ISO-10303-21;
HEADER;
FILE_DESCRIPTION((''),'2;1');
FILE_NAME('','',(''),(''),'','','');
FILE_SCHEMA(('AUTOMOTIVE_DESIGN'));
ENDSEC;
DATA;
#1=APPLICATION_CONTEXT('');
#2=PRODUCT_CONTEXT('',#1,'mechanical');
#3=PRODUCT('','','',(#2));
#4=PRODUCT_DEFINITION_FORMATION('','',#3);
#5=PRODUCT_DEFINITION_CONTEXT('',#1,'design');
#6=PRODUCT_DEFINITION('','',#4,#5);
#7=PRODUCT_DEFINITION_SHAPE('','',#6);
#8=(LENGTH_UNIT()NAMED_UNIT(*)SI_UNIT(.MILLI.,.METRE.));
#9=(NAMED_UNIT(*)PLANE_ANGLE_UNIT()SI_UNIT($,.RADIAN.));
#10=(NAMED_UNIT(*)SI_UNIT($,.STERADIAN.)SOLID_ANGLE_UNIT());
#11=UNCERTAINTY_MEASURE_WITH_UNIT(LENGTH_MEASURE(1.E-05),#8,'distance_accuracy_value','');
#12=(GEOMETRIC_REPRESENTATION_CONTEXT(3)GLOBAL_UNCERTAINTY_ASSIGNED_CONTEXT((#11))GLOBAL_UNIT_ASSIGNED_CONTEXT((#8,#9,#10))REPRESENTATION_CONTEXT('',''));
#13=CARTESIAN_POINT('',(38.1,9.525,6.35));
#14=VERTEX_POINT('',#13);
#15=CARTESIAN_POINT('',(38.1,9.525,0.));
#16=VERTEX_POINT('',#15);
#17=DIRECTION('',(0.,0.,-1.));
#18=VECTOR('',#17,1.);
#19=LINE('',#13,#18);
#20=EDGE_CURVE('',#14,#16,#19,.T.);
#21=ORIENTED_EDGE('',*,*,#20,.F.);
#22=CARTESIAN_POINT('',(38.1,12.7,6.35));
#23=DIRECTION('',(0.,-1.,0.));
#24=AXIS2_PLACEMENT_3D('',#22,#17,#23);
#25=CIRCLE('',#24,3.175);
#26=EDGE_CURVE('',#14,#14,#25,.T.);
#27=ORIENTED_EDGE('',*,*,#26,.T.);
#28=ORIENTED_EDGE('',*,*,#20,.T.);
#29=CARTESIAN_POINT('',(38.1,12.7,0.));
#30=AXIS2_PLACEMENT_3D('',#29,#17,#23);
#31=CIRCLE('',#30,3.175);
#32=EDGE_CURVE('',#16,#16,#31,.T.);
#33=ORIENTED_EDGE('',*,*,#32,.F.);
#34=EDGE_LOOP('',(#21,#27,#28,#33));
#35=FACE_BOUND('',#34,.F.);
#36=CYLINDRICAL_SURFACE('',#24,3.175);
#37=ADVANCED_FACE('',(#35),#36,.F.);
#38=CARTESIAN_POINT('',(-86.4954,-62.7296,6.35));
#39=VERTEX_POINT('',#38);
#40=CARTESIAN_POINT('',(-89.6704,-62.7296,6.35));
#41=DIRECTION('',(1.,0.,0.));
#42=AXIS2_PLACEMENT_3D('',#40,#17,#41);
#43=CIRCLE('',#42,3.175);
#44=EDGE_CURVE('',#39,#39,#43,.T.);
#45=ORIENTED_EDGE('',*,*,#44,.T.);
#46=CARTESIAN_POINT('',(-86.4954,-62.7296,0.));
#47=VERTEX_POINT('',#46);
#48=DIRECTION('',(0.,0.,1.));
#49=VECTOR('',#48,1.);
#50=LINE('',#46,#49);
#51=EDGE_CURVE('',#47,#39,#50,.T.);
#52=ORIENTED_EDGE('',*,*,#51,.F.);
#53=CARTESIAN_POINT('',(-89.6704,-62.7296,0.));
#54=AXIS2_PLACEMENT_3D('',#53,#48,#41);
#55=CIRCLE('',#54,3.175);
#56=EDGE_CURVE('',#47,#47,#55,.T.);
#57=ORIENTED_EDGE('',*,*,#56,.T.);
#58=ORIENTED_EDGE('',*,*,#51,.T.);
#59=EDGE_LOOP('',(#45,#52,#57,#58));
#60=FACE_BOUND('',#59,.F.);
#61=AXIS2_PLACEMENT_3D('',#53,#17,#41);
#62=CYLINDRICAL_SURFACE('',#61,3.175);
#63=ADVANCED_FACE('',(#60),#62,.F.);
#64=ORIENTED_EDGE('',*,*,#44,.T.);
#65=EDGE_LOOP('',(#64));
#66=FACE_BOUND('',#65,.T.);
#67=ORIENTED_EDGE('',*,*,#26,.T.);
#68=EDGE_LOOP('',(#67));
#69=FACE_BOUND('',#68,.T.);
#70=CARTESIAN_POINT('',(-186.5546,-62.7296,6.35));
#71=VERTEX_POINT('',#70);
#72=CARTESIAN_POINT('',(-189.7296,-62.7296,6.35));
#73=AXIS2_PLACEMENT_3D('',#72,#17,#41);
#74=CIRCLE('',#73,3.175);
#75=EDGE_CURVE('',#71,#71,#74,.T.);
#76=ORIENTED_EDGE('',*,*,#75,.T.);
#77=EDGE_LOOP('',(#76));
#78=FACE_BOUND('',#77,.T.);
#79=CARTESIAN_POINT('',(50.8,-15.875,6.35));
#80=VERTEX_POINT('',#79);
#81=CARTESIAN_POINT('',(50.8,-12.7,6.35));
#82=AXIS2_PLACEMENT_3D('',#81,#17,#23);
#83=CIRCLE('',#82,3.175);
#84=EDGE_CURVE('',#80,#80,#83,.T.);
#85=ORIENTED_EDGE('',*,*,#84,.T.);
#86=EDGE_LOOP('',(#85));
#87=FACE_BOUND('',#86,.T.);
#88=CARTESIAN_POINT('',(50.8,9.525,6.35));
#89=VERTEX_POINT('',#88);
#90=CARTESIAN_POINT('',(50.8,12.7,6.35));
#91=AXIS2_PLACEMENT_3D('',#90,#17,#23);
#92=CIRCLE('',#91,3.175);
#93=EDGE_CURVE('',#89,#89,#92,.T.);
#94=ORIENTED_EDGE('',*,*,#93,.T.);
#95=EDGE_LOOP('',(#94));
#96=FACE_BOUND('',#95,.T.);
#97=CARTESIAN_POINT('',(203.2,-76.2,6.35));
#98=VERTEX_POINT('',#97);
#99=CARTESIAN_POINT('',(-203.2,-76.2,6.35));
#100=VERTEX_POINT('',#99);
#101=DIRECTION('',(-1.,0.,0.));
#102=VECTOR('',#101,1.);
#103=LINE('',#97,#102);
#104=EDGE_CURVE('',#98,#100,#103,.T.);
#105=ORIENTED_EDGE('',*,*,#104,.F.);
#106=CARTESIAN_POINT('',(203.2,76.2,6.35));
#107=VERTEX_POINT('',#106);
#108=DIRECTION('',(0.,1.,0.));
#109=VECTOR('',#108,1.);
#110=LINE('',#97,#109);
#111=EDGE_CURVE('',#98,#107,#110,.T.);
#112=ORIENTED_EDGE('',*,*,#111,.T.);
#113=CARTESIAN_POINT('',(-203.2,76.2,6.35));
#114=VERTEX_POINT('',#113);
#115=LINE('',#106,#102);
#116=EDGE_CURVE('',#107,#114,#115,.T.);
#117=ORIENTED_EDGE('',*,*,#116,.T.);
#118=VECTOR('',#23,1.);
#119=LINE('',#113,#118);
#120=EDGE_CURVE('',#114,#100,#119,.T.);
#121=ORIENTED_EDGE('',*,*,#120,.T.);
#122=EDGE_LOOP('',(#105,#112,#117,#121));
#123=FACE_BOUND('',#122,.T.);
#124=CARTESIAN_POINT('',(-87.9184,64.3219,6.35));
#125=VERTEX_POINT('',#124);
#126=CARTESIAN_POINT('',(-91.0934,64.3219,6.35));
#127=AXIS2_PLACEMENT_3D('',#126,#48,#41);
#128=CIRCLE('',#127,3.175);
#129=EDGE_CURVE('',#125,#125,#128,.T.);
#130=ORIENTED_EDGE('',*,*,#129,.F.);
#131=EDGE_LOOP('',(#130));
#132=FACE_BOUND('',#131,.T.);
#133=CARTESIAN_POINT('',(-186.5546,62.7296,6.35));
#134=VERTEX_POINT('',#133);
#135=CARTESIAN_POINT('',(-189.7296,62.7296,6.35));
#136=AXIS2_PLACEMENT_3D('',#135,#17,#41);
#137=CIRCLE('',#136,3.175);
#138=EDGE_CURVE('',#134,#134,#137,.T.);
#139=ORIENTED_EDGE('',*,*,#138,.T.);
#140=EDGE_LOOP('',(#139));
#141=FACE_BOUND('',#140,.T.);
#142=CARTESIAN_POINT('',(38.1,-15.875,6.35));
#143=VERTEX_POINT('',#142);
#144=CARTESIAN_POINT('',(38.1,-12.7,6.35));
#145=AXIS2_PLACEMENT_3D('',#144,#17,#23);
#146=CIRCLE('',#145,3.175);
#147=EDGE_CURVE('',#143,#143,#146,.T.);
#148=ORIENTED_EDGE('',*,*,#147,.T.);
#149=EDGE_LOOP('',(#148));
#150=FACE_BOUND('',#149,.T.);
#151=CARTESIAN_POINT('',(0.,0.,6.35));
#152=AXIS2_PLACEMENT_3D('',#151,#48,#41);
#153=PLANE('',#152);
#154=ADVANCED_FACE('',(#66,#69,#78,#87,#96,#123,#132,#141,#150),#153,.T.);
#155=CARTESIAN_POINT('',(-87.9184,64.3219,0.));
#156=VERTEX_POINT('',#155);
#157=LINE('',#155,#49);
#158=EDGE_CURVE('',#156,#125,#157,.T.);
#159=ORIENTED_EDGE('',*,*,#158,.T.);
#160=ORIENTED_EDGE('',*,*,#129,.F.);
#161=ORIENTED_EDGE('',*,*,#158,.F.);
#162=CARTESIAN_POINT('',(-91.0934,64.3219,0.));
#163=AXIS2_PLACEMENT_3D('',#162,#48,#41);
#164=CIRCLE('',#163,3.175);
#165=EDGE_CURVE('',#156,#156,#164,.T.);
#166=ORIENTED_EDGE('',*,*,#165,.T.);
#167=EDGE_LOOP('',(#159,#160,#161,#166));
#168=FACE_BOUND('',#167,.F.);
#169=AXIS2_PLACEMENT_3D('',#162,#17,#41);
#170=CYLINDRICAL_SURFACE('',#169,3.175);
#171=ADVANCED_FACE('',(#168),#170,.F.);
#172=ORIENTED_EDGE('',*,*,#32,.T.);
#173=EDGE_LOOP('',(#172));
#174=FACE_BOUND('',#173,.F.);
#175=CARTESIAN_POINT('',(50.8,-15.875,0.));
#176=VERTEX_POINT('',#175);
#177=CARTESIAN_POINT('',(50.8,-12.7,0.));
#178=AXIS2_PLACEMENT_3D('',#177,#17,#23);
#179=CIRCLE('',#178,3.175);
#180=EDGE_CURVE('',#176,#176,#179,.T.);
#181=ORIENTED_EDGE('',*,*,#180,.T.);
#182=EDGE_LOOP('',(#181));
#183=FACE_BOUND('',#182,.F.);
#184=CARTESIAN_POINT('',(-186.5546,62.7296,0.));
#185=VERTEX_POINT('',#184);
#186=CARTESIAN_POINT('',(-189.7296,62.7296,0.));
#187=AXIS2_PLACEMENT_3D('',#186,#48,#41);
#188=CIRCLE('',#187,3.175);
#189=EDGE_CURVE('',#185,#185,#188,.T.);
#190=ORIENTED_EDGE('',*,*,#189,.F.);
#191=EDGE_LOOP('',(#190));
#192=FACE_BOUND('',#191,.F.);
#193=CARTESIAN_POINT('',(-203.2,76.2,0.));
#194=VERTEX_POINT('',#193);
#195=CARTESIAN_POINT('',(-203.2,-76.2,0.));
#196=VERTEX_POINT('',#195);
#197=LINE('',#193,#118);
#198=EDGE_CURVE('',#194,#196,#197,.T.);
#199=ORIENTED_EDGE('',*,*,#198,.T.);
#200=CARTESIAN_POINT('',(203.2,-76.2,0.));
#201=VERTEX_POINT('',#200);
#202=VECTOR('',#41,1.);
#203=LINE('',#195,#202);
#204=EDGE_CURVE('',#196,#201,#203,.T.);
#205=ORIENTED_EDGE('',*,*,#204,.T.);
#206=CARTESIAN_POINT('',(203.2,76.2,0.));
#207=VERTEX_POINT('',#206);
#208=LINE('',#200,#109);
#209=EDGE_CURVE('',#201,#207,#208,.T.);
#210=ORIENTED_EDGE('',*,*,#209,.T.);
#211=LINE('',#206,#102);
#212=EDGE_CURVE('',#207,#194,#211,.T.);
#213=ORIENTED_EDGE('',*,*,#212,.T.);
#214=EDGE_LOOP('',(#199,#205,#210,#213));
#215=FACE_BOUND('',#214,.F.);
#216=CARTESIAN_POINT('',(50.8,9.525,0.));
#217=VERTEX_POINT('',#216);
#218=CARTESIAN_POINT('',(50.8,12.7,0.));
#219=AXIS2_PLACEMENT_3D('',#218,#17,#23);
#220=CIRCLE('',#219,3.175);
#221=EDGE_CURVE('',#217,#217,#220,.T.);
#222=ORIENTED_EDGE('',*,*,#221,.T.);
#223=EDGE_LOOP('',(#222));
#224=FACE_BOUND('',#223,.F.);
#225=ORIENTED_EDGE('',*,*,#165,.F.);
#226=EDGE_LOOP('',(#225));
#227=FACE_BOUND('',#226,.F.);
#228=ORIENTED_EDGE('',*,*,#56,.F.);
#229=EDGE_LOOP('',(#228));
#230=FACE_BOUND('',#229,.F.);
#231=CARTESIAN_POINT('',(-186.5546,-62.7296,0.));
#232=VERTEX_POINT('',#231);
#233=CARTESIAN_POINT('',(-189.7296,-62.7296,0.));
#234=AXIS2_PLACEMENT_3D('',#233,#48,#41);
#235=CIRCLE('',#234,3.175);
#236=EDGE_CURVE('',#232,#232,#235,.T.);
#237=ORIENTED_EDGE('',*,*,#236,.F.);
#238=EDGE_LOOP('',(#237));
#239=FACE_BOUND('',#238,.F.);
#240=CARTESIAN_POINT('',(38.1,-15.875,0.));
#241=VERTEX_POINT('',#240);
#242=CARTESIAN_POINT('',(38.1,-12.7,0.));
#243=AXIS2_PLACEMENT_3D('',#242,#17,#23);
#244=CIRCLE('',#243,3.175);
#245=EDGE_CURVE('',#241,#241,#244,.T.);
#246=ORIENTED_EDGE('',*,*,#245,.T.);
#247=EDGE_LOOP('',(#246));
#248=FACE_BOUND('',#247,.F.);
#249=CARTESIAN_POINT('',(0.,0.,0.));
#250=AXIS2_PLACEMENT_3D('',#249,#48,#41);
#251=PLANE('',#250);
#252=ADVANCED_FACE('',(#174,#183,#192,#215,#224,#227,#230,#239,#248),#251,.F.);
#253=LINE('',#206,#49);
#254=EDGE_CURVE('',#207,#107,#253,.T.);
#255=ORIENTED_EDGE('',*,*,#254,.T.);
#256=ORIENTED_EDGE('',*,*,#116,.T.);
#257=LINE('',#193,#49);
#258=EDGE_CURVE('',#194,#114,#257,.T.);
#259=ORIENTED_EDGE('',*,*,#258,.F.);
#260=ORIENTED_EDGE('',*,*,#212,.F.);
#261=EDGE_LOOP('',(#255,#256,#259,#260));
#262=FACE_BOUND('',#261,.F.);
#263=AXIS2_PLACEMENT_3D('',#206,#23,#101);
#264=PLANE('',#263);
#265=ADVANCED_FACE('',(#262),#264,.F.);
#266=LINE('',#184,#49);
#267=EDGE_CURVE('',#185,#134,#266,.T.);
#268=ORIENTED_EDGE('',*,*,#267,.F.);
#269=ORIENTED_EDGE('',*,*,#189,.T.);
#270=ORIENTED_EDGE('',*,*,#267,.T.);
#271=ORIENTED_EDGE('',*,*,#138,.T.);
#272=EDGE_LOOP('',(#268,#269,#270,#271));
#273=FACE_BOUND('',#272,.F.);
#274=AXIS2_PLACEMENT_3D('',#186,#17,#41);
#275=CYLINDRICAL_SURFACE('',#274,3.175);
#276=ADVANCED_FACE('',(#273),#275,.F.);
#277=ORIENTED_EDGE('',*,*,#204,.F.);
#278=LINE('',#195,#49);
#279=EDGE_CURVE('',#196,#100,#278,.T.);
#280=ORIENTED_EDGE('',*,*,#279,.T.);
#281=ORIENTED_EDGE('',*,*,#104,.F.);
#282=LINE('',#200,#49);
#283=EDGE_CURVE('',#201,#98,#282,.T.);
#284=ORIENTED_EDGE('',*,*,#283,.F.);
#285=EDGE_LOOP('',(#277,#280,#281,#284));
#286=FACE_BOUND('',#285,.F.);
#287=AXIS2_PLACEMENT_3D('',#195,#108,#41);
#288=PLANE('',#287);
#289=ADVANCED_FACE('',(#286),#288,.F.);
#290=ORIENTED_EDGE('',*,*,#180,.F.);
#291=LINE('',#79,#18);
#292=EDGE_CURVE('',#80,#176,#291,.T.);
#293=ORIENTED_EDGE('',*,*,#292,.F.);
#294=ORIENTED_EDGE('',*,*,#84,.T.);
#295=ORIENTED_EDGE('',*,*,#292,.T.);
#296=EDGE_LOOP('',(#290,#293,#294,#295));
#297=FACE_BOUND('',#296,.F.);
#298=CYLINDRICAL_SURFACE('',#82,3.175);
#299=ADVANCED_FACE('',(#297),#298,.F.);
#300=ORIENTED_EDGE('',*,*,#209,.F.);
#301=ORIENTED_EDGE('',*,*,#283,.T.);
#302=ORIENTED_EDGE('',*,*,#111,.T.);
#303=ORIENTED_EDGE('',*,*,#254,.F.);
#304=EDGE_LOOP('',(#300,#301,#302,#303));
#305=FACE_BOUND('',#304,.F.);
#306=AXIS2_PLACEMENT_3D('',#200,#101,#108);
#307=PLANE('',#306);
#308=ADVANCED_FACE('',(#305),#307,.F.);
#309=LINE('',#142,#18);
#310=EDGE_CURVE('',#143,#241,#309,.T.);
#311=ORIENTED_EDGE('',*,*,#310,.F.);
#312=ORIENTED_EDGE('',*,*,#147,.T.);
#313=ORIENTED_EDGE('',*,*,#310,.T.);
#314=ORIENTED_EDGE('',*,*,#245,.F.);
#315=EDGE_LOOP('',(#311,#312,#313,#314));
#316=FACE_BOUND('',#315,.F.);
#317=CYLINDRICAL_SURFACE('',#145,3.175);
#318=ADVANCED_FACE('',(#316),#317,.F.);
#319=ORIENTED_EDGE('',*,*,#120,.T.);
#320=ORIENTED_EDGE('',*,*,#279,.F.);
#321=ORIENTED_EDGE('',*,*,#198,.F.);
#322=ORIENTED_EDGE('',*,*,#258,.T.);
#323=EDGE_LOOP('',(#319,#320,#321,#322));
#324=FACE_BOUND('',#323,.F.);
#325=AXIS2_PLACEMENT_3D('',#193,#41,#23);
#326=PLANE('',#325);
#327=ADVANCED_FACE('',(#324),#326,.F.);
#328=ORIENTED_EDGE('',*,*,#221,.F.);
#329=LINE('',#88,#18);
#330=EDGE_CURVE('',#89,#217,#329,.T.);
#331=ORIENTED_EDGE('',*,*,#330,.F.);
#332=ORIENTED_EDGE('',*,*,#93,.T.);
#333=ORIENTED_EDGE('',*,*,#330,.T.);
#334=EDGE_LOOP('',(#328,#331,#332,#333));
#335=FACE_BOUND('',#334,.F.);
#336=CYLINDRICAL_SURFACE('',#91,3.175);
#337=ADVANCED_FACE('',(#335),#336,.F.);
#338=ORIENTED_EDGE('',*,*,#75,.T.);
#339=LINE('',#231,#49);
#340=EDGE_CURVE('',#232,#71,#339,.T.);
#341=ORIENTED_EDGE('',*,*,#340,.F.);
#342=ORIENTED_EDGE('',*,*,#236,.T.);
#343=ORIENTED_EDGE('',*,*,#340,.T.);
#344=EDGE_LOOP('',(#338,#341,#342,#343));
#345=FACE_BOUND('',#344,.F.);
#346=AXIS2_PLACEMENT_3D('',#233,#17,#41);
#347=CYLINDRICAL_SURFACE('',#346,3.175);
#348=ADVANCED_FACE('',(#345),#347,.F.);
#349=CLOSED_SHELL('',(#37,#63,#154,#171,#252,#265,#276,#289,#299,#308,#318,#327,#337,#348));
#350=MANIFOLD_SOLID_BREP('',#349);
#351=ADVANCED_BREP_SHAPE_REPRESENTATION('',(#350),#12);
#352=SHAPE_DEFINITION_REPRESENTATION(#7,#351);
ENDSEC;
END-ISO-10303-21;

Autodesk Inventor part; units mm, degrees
ref_plane "YZ Plane" through (0, 0, 0) normal (1, 0, 0) x (0, 1, 0)
ref_plane "XZ Plane" through (0, 0, 0) normal (0, 1, 0) x (-1, 0, 0)
ref_plane "XY Plane" through (0, 0, 0) normal (0, 0, 1) x (1, 0, 0)
sketch "Sketch1" plane through (0, 0, 0) normal (0, 0, 1) x (1, 0, 0)
  line L0 (-203.2, -76.2) -> (203.2, -76.2)
  line L1 (203.2, -76.2) -> (203.2, 76.2)
  line L2 (203.2, 76.2) -> (-203.2, 76.2)
  line L3 (-203.2, 76.2) -> (-203.2, -76.2)
  line L4 (-203.2, -76.2) -> (203.2, 76.2) construction
  line L5 (203.2, -76.2) -> (-203.2, 76.2) construction
  line L6 (-203.2, 76.2) -> (-189.7296, 62.7296)
  line L7 (-203.2, 76.2) -> (-184.15, 76.2) construction
  line L8 (-203.2, -76.2) -> (-189.7296, -62.7296)
  line L9 (-203.2, -76.2) -> (-184.15, -76.2) construction
  line L10 (-203.2, -76.2) -> (-193.675, -76.2)
  line L11 (-203.2, -76.2) -> (-76.2, -76.2) construction
  line L12 (-76.2, -76.2) -> (-89.6704, -62.7296) construction
  circle A0 centre (-189.7296, 62.7296) radius 3.175
  circle A1 centre (-89.6704, -62.7296) radius 3.175
  circle A2 centre (-189.7296, -62.7296) radius 3.175
  line L13 (-189.7296, 62.7296) -> (-89.6704, -62.7296)
  line L14 (-203.2, 76.2) -> (-76.2, 76.2) construction
  line L15 (-76.2, 76.2) -> (-91.0934, 64.3219) construction
  circle A3 centre (-91.0934, 64.3219) radius 3.175
  point P0 (0, 0)
  dimension "d0" = 406.4
  dimension "d1" = 152.4
  dimension "d2" = 19.05
  dimension "d3" = 45
  dimension "d4" = 19.05
  dimension "d5" = 45
  dimension "d6" = 127
  dimension "d7" = 19.05
  dimension "d8" = 6.35
  dimension "d10" = 6.35
  dimension "d11" = 6.35
  dimension "d15" = 127
  dimension "d16" = 6.35
extrude "Extrusion2" add sketch "Sketch1" along normal blind 6.35
sketch "Sketch2" plane through (0, 0, 6.35) normal (0, 0, 1) x (1, 0, 0)
  line L0 (203.2, -76.2) -> (203.2, 76.2) projected
  line L1 (-203.2, 76.2) -> (-203.2, -76.2) projected
  line L2 (203.2, 0) -> (38.1, 0) construction
  line L3 (38.1, 0) -> (38.1, 12.7) construction
  line L4 (38.1, 0) -> (38.1, -12.7) construction
  line L5 (38.1, 0) -> (50.8, 0) construction
  line L6 (50.8, 0) -> (50.8, 12.7) construction
  line L7 (50.8, 12.7) -> (50.8, -12.7) construction
  point P0 (0, 0)
  dimension "d19" = 165.1
  dimension "d20" = 12.7
  dimension "d21" = 12.7
  dimension "d22" = 12.7
  dimension "d23" = 12.7
  dimension "d24" = 25.4
hole "Hole1" at (50.8, 12.7, 6.35) at (50.8, -12.7, 6.35) at (38.1, -12.7, 6.35) at (38.1, 12.7, 6.35) direction (0, 0, -1) diameter 6.35 end through all
properties part number "big plate"
